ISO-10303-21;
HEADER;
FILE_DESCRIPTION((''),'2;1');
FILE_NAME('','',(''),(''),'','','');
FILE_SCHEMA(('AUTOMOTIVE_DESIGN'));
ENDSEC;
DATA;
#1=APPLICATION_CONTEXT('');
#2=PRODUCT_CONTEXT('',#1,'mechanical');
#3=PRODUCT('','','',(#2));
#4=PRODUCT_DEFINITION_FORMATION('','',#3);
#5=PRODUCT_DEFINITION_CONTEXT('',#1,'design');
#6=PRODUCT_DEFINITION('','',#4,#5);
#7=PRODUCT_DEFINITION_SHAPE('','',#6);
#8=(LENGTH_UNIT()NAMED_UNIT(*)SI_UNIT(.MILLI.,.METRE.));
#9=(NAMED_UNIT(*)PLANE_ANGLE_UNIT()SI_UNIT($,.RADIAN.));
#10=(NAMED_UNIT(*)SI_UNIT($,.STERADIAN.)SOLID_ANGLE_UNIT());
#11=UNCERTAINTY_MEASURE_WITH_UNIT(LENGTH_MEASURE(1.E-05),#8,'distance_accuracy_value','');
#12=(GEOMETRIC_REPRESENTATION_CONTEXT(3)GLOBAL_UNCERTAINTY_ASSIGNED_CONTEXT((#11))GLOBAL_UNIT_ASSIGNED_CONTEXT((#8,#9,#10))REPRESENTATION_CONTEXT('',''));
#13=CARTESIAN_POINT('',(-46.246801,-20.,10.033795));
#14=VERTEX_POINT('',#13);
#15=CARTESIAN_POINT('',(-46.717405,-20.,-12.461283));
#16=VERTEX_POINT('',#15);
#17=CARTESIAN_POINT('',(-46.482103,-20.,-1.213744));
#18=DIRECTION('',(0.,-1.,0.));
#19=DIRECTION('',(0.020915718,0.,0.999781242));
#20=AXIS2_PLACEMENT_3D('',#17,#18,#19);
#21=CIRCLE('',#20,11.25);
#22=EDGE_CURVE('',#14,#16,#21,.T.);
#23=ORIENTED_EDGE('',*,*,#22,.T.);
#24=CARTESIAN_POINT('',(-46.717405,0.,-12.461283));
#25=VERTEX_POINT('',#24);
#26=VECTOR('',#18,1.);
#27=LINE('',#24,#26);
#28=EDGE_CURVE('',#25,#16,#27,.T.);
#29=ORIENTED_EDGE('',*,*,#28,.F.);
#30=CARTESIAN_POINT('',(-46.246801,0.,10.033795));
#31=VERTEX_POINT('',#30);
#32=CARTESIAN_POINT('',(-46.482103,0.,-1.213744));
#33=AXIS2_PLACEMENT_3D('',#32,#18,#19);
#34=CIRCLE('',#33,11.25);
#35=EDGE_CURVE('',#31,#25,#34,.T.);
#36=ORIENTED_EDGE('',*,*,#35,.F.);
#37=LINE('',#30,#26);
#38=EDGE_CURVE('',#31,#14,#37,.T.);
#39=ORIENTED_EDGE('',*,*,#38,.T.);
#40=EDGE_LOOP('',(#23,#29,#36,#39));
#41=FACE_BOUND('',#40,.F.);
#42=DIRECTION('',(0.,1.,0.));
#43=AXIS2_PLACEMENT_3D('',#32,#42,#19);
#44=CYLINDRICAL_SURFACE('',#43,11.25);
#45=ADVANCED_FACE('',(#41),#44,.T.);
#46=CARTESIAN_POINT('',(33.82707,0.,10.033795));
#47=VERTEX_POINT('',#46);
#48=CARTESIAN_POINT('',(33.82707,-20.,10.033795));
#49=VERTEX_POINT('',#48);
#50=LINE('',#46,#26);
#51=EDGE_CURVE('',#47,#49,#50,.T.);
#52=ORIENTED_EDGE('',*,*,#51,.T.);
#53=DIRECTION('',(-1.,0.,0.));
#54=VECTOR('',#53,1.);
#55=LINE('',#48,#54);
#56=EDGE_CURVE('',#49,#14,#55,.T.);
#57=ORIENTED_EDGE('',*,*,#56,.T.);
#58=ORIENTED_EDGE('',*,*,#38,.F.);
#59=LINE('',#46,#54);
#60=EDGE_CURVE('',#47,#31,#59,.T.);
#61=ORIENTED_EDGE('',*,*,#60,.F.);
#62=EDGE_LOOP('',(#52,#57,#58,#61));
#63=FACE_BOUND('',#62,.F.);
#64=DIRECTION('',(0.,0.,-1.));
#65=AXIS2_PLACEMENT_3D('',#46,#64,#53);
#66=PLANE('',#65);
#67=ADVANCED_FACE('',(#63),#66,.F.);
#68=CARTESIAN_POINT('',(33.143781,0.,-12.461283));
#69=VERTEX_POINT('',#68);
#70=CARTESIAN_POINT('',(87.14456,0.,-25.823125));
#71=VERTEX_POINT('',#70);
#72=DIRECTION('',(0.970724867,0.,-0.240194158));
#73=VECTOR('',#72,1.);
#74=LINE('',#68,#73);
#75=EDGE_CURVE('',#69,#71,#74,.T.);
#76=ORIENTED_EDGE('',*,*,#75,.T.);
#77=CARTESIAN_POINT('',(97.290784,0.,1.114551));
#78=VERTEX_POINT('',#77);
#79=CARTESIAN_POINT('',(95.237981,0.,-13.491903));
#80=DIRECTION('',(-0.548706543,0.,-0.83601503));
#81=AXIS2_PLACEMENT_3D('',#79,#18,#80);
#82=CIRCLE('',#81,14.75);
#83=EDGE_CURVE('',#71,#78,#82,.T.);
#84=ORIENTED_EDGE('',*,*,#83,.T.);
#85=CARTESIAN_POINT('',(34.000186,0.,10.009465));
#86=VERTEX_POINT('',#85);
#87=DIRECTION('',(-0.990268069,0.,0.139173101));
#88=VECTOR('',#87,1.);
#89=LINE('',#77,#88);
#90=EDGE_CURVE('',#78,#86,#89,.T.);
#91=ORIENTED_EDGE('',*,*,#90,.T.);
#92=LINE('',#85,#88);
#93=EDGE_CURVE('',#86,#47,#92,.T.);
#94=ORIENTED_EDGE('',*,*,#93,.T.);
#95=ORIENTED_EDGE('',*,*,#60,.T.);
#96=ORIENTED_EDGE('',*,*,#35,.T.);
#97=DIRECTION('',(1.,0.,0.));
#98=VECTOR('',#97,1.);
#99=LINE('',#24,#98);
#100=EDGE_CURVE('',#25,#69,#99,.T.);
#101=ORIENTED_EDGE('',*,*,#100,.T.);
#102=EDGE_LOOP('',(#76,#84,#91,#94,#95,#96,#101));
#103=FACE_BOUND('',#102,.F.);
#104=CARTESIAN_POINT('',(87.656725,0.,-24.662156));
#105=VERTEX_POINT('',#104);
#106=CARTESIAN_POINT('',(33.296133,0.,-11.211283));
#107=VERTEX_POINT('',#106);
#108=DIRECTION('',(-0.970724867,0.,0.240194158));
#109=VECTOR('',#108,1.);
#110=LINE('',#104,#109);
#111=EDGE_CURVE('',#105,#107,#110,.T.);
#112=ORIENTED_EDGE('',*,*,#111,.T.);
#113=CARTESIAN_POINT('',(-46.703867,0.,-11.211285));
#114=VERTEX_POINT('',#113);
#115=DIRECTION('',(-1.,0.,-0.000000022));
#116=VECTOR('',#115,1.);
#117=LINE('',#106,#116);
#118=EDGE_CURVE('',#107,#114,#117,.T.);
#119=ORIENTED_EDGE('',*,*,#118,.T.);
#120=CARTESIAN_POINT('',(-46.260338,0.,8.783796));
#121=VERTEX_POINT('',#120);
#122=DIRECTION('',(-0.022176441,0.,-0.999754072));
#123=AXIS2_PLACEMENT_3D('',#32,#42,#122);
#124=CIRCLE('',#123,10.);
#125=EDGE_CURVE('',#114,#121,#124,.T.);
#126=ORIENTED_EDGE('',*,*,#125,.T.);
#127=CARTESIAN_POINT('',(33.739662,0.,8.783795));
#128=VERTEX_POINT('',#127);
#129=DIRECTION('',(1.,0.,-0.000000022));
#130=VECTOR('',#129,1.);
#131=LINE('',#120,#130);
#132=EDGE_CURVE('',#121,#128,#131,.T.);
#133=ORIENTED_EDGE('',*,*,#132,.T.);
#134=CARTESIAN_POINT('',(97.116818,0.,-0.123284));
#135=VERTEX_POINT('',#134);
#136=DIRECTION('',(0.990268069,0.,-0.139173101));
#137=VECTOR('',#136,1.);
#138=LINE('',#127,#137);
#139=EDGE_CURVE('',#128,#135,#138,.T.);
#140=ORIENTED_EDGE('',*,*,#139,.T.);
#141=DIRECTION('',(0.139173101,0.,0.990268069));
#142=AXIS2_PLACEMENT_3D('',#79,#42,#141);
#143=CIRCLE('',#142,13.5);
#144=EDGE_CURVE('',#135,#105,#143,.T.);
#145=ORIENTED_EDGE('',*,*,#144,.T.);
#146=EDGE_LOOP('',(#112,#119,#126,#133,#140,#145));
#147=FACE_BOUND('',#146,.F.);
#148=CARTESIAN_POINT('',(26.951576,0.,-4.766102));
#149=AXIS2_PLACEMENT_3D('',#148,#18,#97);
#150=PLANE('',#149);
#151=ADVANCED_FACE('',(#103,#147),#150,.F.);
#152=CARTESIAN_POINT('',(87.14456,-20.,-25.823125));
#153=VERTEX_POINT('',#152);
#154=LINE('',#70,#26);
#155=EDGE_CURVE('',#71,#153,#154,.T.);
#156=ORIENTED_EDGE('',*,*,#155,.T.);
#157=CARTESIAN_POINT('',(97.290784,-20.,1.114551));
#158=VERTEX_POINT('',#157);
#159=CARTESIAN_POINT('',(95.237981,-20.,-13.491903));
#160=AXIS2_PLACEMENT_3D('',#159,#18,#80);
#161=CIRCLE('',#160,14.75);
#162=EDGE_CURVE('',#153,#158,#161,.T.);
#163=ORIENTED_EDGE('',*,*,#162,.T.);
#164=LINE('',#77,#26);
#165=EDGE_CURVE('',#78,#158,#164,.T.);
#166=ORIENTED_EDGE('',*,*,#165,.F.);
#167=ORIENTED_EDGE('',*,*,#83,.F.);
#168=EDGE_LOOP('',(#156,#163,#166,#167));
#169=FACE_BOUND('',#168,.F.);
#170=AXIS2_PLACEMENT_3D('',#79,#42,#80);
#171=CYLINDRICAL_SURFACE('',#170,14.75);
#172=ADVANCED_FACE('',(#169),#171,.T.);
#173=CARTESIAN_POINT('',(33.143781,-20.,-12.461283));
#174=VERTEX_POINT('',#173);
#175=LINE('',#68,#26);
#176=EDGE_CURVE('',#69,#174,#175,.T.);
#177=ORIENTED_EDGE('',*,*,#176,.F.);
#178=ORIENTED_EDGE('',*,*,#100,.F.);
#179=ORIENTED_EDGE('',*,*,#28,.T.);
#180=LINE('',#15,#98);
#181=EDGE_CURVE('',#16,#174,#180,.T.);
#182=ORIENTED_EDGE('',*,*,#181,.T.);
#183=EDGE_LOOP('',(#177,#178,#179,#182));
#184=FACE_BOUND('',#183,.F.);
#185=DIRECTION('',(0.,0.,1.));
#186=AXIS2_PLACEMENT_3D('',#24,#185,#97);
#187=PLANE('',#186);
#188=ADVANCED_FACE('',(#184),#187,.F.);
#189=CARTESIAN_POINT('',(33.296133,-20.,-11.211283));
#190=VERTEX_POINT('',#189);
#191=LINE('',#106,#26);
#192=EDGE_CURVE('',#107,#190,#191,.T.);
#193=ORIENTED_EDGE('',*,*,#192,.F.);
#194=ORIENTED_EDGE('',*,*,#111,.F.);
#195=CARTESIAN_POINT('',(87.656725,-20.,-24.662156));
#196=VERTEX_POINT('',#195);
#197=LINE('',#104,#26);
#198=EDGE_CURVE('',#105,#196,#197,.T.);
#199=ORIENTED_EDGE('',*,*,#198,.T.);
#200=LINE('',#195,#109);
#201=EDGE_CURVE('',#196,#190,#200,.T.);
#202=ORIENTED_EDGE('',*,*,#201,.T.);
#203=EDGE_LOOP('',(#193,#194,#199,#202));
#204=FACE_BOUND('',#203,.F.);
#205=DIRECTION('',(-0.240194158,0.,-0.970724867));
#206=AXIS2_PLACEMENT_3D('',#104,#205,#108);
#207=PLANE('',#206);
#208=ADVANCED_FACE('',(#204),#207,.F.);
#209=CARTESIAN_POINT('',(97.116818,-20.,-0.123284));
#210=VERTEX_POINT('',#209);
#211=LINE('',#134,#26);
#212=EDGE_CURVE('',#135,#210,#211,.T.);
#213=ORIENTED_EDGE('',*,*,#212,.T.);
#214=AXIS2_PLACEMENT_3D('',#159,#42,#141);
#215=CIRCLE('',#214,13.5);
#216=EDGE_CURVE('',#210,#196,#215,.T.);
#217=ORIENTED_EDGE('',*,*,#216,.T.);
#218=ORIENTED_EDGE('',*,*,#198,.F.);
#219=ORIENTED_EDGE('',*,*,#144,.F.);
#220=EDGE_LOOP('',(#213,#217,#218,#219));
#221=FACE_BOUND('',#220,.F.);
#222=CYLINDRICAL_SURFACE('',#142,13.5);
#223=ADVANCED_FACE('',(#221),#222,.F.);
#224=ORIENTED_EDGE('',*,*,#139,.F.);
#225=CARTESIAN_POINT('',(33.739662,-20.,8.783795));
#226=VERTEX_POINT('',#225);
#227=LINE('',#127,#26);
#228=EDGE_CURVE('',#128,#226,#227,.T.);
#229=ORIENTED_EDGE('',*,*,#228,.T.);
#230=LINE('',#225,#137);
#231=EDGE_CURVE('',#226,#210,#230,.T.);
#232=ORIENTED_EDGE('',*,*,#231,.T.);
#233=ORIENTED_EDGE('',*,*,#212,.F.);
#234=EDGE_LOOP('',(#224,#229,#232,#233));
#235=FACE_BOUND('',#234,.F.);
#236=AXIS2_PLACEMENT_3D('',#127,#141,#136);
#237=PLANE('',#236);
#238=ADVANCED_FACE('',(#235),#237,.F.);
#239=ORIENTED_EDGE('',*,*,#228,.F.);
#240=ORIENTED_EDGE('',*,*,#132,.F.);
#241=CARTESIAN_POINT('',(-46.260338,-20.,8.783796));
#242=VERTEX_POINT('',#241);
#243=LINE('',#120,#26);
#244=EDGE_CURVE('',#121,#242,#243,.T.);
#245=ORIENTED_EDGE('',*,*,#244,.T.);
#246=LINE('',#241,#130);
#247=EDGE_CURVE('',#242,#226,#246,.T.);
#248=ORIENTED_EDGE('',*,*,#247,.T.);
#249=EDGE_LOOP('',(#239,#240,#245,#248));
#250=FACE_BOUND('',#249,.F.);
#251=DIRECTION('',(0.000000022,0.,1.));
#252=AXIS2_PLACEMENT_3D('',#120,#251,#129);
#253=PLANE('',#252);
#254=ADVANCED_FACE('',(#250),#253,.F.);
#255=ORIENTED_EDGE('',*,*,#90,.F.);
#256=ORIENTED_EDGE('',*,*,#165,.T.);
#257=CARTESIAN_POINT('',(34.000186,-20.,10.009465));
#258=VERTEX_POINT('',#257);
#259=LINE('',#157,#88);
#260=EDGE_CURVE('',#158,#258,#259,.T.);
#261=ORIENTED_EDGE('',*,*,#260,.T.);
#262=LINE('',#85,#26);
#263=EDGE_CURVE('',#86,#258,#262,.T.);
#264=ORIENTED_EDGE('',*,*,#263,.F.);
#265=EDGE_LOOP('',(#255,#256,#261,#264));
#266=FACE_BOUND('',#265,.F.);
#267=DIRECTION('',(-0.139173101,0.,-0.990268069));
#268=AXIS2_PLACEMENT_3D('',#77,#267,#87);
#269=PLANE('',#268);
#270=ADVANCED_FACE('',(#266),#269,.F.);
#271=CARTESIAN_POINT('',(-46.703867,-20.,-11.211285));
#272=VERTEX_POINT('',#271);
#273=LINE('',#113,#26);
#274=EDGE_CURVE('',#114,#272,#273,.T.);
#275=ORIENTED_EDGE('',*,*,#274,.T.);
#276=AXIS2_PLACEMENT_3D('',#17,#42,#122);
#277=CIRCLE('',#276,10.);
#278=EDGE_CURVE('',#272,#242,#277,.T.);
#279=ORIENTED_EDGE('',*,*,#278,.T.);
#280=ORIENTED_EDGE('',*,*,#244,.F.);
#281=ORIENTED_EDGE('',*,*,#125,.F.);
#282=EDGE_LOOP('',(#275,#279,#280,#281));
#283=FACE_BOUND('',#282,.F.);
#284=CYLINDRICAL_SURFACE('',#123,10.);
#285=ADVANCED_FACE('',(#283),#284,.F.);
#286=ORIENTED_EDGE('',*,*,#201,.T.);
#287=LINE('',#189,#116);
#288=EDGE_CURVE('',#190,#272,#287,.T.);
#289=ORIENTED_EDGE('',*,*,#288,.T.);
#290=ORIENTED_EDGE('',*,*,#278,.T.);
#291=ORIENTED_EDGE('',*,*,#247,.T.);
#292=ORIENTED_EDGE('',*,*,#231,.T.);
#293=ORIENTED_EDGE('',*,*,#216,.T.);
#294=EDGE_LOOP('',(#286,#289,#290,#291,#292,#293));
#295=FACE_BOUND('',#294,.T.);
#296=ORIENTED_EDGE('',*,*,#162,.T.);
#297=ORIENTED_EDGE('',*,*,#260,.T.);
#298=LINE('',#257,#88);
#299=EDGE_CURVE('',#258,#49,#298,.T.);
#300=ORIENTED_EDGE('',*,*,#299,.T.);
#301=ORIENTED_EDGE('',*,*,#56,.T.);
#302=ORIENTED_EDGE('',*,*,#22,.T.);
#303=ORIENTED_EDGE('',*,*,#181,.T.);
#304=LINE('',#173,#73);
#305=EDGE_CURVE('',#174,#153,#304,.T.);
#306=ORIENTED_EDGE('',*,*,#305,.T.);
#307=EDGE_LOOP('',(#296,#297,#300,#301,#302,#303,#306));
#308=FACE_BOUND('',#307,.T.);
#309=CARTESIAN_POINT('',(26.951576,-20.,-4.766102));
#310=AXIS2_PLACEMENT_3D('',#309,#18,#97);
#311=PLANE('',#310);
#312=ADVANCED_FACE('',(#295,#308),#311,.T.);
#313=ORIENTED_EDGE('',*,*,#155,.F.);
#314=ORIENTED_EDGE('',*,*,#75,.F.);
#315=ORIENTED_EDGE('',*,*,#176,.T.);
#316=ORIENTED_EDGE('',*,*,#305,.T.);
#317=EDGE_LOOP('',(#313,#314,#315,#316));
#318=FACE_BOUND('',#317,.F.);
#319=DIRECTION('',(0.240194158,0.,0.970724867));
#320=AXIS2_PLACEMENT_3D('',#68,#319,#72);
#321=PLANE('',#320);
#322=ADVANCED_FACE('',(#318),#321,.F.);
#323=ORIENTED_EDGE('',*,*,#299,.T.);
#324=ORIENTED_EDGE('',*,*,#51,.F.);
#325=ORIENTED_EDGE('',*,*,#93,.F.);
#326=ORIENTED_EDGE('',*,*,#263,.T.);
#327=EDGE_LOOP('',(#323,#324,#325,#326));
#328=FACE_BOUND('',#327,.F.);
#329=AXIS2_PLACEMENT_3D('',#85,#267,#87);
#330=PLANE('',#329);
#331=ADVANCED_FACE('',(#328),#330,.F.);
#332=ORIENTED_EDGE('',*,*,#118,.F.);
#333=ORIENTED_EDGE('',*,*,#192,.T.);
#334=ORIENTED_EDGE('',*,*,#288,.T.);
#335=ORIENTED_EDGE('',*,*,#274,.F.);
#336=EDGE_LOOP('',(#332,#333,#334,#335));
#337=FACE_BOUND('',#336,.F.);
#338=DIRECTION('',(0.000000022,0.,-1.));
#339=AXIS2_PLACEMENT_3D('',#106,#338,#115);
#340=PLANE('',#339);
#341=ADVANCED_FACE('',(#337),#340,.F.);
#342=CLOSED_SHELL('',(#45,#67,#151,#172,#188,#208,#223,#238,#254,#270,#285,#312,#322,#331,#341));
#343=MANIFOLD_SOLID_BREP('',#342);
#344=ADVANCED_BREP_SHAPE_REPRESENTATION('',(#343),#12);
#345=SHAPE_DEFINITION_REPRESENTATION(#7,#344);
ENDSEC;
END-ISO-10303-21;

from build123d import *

# Parameters (mm, degrees)
F1_DEPTH = 20


# Not quite as in the source:
# - ends of sketch curves that miss each other by under 0.0002 mm in the source are joined


with BuildPart() as f1:
    # F0 (on Front) → F1 (new body)
    with BuildSketch(Plane.XZ):
        with BuildLine():
            Line((97.2907843779, 1.1145511836), (34.0001858397, 10.009464731))
            Line((34.0001858397, 10.009464731), (33.8270701172, 10.0337945591))
            Line((33.8270701172, 10.0337945591), (33.7396616023, 10.0337945591))
            Line((33.7396616023, 10.0337945591), (-46.2468009406, 10.0337945591))
            ThreePointArc((-46.2468009406, 10.0337945591), (-57.7296417452, -0.9784425912), (-46.7174045949, -12.4612833958))
            Line((-46.7174045949, -12.4612833958), (33.1437814598, -12.4612833958))
            Line((33.1437814598, -12.4612833958), (87.1445596341, -25.8231245195))
            ThreePointArc((87.1445596341, -25.8231245195), (109.0413090103, -18.6910027208), (97.2907843779, 1.1145511836))
        make_face()
        with BuildLine():
            ThreePointArc((-46.7038671765, -11.2112851433), (-56.4796434927, -0.9919800096), (-46.260338359, 8.7837963066))
            Line((-46.260338359, 8.7837963066), (33.7396616023, 8.7837945591))
            Line((33.7396616023, 8.7837945591), (97.1168180017, -0.1232839023))
            ThreePointArc((97.1168180017, -0.1232839023), (107.8343480434, -18.3479856965), (87.6567253878, -24.6621562401))
            Line((87.6567253878, -24.6621562401), (33.2961328623, -11.2112833958))
            Line((33.2961328623, -11.2112833958), (-46.7038671765, -11.2112851433))
        make_face(mode=Mode.SUBTRACT)
    extrude(amount=F1_DEPTH)


solid = f1.part
